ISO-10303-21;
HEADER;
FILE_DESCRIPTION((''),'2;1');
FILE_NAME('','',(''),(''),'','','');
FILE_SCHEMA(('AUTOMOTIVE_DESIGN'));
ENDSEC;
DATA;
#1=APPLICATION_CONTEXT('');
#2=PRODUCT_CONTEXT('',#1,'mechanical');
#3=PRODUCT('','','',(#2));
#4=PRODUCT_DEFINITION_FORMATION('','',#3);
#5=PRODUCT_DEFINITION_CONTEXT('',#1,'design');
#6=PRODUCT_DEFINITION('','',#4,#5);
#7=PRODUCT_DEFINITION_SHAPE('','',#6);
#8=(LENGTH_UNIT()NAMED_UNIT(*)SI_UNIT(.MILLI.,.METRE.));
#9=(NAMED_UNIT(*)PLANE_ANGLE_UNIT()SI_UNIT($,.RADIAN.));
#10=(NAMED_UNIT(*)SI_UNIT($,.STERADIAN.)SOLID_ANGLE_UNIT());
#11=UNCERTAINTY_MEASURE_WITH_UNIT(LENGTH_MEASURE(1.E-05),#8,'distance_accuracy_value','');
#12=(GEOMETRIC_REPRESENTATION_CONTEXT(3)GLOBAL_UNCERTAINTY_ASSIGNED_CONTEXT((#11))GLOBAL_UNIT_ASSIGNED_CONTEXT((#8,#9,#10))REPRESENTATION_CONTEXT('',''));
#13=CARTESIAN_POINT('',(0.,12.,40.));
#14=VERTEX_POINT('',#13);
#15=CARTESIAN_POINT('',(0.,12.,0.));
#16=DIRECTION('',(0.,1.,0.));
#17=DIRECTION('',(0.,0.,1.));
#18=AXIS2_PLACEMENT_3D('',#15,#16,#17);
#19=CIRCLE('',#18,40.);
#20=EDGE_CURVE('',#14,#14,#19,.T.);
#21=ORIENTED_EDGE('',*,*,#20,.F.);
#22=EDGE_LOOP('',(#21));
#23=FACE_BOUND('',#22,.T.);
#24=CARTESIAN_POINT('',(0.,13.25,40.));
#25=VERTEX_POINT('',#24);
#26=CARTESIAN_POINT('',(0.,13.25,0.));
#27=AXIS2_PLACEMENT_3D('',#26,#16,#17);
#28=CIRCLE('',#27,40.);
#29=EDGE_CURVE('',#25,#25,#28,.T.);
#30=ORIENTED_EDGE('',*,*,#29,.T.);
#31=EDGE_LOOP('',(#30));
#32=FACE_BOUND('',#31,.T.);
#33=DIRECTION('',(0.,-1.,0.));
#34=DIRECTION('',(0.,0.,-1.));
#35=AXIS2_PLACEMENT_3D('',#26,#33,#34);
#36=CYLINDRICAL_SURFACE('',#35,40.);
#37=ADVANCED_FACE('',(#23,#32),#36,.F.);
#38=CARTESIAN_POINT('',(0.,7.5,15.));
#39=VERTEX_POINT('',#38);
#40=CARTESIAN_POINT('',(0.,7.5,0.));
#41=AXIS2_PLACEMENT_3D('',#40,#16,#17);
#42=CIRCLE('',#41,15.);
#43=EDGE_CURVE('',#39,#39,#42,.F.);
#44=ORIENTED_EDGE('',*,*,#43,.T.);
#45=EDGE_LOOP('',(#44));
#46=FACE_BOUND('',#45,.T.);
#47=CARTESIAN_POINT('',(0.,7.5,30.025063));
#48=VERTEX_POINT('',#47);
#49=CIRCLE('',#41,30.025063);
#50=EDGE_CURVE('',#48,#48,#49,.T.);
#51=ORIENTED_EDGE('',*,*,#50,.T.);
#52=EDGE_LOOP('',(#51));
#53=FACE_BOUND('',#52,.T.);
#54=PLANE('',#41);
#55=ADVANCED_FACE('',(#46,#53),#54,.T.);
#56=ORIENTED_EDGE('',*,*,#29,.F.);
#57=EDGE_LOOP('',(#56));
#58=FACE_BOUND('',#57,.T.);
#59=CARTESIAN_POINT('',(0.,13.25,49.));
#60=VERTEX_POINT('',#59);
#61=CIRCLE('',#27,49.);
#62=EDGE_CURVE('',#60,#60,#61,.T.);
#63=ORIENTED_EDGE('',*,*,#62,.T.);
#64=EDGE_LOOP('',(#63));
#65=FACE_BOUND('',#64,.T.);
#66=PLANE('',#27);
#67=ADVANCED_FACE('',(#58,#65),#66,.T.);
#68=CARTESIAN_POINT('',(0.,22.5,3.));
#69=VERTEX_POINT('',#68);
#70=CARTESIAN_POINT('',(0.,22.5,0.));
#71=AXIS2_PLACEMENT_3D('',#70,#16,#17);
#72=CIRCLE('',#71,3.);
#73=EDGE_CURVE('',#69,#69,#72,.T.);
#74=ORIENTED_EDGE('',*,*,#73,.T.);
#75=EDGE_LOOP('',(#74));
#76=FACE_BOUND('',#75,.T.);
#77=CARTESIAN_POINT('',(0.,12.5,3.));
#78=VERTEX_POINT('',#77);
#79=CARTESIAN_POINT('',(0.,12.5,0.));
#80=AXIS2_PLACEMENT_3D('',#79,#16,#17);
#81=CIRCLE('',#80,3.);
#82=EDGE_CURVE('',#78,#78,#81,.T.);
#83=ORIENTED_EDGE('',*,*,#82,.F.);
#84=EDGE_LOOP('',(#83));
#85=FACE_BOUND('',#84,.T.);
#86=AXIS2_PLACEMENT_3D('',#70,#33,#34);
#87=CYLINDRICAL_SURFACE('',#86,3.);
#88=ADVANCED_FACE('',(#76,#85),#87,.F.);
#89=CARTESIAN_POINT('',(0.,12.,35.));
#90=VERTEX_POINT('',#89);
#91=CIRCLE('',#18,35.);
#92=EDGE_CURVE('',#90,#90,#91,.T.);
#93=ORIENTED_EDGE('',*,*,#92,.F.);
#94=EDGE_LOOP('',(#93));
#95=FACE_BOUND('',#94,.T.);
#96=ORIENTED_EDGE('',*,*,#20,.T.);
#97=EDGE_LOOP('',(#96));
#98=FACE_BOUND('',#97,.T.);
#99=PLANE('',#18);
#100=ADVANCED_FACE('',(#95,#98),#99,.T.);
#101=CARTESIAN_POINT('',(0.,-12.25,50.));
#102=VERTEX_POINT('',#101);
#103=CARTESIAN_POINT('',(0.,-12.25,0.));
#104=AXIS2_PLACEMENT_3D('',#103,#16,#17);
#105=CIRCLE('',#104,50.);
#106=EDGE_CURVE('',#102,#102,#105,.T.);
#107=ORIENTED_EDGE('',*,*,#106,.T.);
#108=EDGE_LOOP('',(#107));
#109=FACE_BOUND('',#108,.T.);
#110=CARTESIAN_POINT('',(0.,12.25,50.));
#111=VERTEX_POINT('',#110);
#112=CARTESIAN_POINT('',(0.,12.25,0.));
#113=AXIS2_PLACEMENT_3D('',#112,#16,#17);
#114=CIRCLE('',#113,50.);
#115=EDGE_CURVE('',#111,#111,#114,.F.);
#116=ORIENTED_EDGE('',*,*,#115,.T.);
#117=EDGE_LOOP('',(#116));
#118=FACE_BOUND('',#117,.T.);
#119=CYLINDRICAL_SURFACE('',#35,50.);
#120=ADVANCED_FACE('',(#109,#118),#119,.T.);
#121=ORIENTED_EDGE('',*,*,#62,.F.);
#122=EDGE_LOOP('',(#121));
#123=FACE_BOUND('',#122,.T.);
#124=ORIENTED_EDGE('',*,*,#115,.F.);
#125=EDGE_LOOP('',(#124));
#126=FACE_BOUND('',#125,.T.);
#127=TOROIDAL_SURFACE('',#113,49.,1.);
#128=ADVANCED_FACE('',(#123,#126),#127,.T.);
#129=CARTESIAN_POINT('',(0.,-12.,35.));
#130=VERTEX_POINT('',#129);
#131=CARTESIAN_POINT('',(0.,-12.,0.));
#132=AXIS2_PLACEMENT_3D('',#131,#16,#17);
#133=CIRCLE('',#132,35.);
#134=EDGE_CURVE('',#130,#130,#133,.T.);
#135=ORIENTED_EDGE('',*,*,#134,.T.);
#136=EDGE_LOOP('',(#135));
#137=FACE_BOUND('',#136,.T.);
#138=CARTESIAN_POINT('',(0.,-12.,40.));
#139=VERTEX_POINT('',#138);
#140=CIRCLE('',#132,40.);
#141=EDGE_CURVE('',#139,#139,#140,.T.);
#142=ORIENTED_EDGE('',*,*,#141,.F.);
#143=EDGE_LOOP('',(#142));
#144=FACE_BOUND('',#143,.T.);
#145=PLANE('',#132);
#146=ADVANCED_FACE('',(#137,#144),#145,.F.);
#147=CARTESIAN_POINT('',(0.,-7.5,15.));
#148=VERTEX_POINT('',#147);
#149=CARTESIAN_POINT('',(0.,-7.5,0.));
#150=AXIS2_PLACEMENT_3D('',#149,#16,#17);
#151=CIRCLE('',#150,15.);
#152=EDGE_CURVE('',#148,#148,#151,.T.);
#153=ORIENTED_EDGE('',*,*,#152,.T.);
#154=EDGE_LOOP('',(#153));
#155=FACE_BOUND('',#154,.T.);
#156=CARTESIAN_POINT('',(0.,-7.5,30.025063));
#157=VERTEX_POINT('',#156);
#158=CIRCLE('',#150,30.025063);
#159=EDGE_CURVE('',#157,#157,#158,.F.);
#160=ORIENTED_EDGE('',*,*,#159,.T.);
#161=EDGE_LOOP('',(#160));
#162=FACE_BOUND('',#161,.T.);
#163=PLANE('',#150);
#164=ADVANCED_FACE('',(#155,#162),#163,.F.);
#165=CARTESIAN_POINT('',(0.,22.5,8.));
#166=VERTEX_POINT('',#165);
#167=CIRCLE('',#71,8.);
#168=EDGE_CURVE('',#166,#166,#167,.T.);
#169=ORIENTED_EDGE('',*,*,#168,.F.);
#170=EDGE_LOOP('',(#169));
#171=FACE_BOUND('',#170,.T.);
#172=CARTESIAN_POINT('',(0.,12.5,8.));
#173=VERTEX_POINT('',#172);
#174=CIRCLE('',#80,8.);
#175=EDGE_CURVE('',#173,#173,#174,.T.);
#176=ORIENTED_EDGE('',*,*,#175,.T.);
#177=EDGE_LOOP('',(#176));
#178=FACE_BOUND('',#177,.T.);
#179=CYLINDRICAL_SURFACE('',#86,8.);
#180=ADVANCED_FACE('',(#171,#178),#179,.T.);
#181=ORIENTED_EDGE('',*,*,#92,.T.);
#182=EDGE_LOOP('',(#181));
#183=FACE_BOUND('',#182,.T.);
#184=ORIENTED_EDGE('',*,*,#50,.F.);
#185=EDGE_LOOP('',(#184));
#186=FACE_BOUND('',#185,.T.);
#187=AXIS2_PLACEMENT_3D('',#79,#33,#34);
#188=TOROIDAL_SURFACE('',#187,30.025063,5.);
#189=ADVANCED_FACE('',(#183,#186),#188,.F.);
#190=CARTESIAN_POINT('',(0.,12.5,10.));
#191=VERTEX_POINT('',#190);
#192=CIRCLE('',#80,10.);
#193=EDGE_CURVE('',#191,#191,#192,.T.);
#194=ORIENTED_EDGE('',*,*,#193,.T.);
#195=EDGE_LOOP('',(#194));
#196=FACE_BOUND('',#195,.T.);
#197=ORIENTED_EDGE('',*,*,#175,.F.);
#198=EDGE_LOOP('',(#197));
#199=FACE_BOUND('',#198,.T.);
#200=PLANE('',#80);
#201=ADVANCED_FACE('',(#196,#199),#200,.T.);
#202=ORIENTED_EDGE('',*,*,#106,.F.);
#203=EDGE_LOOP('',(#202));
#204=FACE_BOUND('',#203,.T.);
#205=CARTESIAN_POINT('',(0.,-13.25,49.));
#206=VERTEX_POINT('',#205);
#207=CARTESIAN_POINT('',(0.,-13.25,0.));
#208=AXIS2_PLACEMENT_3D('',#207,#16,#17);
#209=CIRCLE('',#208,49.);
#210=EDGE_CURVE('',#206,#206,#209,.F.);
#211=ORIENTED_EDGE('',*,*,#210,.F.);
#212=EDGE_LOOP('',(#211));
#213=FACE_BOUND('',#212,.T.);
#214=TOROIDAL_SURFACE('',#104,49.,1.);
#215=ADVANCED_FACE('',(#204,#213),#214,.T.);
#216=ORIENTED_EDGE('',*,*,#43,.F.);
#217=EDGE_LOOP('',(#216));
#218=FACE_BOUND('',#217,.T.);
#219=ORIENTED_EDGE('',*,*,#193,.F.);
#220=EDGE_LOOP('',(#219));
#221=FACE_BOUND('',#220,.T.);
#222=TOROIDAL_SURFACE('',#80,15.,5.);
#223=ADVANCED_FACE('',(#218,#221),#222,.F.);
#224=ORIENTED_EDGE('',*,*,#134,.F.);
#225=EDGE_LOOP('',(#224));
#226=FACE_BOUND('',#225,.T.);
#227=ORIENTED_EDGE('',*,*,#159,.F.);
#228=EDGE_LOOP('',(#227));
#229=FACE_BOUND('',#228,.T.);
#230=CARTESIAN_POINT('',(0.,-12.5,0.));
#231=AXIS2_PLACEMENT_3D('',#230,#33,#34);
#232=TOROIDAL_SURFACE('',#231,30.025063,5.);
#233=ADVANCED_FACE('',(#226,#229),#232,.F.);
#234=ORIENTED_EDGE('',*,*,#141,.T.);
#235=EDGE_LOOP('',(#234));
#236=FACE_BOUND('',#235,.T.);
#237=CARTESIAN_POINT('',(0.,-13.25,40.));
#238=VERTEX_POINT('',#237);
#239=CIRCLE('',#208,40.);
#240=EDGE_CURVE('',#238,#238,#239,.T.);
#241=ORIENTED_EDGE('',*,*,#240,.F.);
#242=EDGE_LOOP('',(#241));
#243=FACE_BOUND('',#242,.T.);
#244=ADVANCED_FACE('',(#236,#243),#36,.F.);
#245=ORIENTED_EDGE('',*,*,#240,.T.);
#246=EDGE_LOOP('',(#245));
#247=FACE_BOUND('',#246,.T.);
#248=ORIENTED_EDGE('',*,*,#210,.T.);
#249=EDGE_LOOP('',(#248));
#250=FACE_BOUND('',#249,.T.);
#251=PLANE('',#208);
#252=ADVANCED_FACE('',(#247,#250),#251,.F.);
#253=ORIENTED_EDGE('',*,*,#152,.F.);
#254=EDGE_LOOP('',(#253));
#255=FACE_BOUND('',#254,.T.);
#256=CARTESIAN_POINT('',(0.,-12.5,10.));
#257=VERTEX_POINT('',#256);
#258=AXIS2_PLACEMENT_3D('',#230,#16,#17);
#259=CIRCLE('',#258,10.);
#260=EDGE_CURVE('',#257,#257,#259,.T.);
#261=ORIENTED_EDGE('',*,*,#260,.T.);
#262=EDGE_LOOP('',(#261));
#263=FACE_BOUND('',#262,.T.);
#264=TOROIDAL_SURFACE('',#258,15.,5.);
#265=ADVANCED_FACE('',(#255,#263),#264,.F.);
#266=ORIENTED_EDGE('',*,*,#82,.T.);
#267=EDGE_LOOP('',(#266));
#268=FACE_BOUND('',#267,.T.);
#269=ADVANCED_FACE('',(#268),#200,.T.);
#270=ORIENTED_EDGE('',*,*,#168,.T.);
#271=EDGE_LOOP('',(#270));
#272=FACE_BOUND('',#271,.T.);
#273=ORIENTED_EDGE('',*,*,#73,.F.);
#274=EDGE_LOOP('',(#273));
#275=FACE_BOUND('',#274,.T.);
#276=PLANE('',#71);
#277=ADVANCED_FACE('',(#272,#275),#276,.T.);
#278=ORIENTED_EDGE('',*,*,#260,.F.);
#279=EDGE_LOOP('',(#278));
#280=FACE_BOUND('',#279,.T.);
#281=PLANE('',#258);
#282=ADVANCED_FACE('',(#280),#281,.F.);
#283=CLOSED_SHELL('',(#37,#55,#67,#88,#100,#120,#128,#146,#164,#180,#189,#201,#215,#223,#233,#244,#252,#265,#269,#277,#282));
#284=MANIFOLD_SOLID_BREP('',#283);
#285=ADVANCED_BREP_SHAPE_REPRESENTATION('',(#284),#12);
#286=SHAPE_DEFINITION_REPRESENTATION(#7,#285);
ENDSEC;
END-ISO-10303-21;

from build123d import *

# Parameters (mm, degrees)
SKETCH1_R           = 50
SKETCH1_R_2         = 40
BOSS_EXTRUDE1_DEPTH = 13.25
SKETCH2_R           = 40
SKETCH2_R_2         = 35
BOSS_EXTRUDE2_DEPTH = 12
SKETCH4_R           = 35
SKETCH4_R_2         = 10
BOSS_EXTRUDE3_DEPTH = 7.5
SKETCH7_R           = 10
BOSS_EXTRUDE4_DEPTH = 12.5
FILLET1_R           = 5
SKETCH10_R          = 8
BOSS_EXTRUDE5_DEPTH = 10
SKETCH11_R          = 3
CUT_EXTRUDE2_DEPTH  = 76.253322186
FILLET2_R           = 1


with BuildPart() as part:
    # Sketch1 → Boss-Extrude1 (new, symmetric)
    with BuildSketch(Plane(origin=(0, 0, 0), x_dir=(1, 0, 0), z_dir=(0, 1, 0))):
        with Locations(Location((0, 0, 0), (0, 0, 270))):
            Circle(SKETCH1_R)
        with Locations(Location((0, 0, 0), (0, 0, 270))):
            Circle(SKETCH1_R_2, mode=Mode.SUBTRACT)
    extrude(amount=BOSS_EXTRUDE1_DEPTH, both=True)

    # Sketch2 → Boss-Extrude2 (add, symmetric)
    with BuildSketch(Plane(origin=(0, 0, 0), x_dir=(1, 0, 0), z_dir=(0, 1, 0))):
        with Locations(Location((0, 0, 0), (0, 0, 270))):
            Circle(SKETCH2_R)
        with Locations(Location((0, 0, 0), (0, 0, 270))):
            Circle(SKETCH2_R_2, mode=Mode.SUBTRACT)
    extrude(amount=BOSS_EXTRUDE2_DEPTH, both=True)

    # Sketch4 → Boss-Extrude3 (add, symmetric)
    with BuildSketch(Plane(origin=(0, 0, 0), x_dir=(1, 0, 0), z_dir=(0, 1, 0))):
        with Locations(Location((0, 0, 0), (0, 0, 270))):
            Circle(SKETCH4_R)
        with Locations(Location((0, 0, 0), (0, 0, 270))):
            Circle(SKETCH4_R_2, mode=Mode.SUBTRACT)
    extrude(amount=BOSS_EXTRUDE3_DEPTH, both=True)

    # Sketch7 → Boss-Extrude4 (add, symmetric)
    with BuildSketch(Plane(origin=(0, 0, 0), x_dir=(1, 0, 0), z_dir=(0, 1, 0))):
        with Locations(Location((0, 0, 0), (0, 0, 270))):
            Circle(SKETCH7_R)
    extrude(amount=BOSS_EXTRUDE4_DEPTH, both=True)

    # Fillet1
    # the kernel refuses this fillet: 5 mm, written as the material it adds along each edge
    with BuildSketch(Plane(origin=(0, 7.5, 0), x_dir=(0, 0, 1), z_dir=(-1, 0, 0))) as fillet1_piece_1:
        with BuildLine():
            CenterArc((30.025062814, 5), FILLET1_R, 270, 84.260829523)
            Line((30.025062814, 0), (30.025062814, -0.1))
            Line((30.025062814, -0.1), (35, -0.1))
            Line((35, -0.1), (35.1, 0))
            ThreePointArc((35.1, 0), (35.1, 2.25), (35.099498744, 4.49))
            Line((35.099498744, 4.49), (35, 4.5))
        make_face()
    revolve(axis=Axis((0, 7.5, 0), (0, 1, 0)))
    with BuildSketch(Plane(origin=(0, -7.5, 0), x_dir=(0, 0, 1), z_dir=(-1, 0, 0))) as fillet1_piece_2:
        with BuildLine():
            CenterArc((30.025062814, -5), FILLET1_R, 5.739170477, 84.260829523)
            Line((35, -4.5), (35.099498744, -4.49))
            ThreePointArc((35.099498744, -4.49), (35.1, -2.25), (35.1, 0))
            Line((35.1, 0), (35, 0.1))
            Line((35, 0.1), (30.025062814, 0.1))
            Line((30.025062814, 0.1), (30.025062814, 0))
        make_face()
    revolve(axis=Axis((0, -7.5, 0), (0, 1, 0)))
    with BuildSketch(Plane(origin=(0, 7.5, 0), x_dir=(0, 0, 1), z_dir=(-1, 0, 0))) as fillet1_piece_3:
        with BuildLine():
            CenterArc((10 + FILLET1_R, FILLET1_R), FILLET1_R, 180, 90)
            Line((10, FILLET1_R), (10 - FILLET1_R * 0.02, FILLET1_R))
            Line((10 - FILLET1_R * 0.02, FILLET1_R), (10 - FILLET1_R * 0.02, -FILLET1_R * 0.02))
            Line((10 - FILLET1_R * 0.02, -FILLET1_R * 0.02), (10 + FILLET1_R, -FILLET1_R * 0.02))
            Line((10 + FILLET1_R, -FILLET1_R * 0.02), (10 + FILLET1_R, 0))
        make_face()
    revolve(axis=Axis((0, 7.5, 0), (0, 1, 0)))
    with BuildSketch(Plane(origin=(0, -7.5, 0), x_dir=(0, 0, 1), z_dir=(-1, 0, 0))) as fillet1_piece_4:
        with BuildLine():
            CenterArc((10 + FILLET1_R, -FILLET1_R), FILLET1_R, 90, 90)
            Line((10 + FILLET1_R, 0), (10 + FILLET1_R, FILLET1_R * 0.02))
            Line((10 + FILLET1_R, FILLET1_R * 0.02), (10 - FILLET1_R * 0.02, FILLET1_R * 0.02))
            Line((10 - FILLET1_R * 0.02, FILLET1_R * 0.02), (10 - FILLET1_R * 0.02, -FILLET1_R))
            Line((10 - FILLET1_R * 0.02, -FILLET1_R), (10, -FILLET1_R))
        make_face()
    revolve(axis=Axis((0, -7.5, 0), (0, 1, 0)))

    # Sketch10 → Boss-Extrude5 (add)
    with BuildSketch(Plane(origin=(0, 12.5, 0), x_dir=(1, 0, 0), z_dir=(0, 1, 0))):
        with Locations(Location((0, 0, 0), (0, 0, 270))):
            Circle(SKETCH10_R)
    extrude(amount=BOSS_EXTRUDE5_DEPTH)

    # Sketch11 → Cut-Extrude2 (cut, through all)
    with BuildSketch(Plane(origin=(0, 12.5, 0), x_dir=(1, 0, 0), z_dir=(0, 1, 0))):
        with Locations(Location((0, 0, 0), (0, 0, 270))):
            Circle(SKETCH11_R)
    extrude(amount=CUT_EXTRUDE2_DEPTH, mode=Mode.SUBTRACT)

    # Fillet2
    fillet2_edges = [part.edges().sort_by_distance(p)[0] for p in [
        (0, -13.25, -50),
        (0, 13.25, -50),
    ]]
    fillet(fillet2_edges, radius=FILLET2_R)


solid = part.part
